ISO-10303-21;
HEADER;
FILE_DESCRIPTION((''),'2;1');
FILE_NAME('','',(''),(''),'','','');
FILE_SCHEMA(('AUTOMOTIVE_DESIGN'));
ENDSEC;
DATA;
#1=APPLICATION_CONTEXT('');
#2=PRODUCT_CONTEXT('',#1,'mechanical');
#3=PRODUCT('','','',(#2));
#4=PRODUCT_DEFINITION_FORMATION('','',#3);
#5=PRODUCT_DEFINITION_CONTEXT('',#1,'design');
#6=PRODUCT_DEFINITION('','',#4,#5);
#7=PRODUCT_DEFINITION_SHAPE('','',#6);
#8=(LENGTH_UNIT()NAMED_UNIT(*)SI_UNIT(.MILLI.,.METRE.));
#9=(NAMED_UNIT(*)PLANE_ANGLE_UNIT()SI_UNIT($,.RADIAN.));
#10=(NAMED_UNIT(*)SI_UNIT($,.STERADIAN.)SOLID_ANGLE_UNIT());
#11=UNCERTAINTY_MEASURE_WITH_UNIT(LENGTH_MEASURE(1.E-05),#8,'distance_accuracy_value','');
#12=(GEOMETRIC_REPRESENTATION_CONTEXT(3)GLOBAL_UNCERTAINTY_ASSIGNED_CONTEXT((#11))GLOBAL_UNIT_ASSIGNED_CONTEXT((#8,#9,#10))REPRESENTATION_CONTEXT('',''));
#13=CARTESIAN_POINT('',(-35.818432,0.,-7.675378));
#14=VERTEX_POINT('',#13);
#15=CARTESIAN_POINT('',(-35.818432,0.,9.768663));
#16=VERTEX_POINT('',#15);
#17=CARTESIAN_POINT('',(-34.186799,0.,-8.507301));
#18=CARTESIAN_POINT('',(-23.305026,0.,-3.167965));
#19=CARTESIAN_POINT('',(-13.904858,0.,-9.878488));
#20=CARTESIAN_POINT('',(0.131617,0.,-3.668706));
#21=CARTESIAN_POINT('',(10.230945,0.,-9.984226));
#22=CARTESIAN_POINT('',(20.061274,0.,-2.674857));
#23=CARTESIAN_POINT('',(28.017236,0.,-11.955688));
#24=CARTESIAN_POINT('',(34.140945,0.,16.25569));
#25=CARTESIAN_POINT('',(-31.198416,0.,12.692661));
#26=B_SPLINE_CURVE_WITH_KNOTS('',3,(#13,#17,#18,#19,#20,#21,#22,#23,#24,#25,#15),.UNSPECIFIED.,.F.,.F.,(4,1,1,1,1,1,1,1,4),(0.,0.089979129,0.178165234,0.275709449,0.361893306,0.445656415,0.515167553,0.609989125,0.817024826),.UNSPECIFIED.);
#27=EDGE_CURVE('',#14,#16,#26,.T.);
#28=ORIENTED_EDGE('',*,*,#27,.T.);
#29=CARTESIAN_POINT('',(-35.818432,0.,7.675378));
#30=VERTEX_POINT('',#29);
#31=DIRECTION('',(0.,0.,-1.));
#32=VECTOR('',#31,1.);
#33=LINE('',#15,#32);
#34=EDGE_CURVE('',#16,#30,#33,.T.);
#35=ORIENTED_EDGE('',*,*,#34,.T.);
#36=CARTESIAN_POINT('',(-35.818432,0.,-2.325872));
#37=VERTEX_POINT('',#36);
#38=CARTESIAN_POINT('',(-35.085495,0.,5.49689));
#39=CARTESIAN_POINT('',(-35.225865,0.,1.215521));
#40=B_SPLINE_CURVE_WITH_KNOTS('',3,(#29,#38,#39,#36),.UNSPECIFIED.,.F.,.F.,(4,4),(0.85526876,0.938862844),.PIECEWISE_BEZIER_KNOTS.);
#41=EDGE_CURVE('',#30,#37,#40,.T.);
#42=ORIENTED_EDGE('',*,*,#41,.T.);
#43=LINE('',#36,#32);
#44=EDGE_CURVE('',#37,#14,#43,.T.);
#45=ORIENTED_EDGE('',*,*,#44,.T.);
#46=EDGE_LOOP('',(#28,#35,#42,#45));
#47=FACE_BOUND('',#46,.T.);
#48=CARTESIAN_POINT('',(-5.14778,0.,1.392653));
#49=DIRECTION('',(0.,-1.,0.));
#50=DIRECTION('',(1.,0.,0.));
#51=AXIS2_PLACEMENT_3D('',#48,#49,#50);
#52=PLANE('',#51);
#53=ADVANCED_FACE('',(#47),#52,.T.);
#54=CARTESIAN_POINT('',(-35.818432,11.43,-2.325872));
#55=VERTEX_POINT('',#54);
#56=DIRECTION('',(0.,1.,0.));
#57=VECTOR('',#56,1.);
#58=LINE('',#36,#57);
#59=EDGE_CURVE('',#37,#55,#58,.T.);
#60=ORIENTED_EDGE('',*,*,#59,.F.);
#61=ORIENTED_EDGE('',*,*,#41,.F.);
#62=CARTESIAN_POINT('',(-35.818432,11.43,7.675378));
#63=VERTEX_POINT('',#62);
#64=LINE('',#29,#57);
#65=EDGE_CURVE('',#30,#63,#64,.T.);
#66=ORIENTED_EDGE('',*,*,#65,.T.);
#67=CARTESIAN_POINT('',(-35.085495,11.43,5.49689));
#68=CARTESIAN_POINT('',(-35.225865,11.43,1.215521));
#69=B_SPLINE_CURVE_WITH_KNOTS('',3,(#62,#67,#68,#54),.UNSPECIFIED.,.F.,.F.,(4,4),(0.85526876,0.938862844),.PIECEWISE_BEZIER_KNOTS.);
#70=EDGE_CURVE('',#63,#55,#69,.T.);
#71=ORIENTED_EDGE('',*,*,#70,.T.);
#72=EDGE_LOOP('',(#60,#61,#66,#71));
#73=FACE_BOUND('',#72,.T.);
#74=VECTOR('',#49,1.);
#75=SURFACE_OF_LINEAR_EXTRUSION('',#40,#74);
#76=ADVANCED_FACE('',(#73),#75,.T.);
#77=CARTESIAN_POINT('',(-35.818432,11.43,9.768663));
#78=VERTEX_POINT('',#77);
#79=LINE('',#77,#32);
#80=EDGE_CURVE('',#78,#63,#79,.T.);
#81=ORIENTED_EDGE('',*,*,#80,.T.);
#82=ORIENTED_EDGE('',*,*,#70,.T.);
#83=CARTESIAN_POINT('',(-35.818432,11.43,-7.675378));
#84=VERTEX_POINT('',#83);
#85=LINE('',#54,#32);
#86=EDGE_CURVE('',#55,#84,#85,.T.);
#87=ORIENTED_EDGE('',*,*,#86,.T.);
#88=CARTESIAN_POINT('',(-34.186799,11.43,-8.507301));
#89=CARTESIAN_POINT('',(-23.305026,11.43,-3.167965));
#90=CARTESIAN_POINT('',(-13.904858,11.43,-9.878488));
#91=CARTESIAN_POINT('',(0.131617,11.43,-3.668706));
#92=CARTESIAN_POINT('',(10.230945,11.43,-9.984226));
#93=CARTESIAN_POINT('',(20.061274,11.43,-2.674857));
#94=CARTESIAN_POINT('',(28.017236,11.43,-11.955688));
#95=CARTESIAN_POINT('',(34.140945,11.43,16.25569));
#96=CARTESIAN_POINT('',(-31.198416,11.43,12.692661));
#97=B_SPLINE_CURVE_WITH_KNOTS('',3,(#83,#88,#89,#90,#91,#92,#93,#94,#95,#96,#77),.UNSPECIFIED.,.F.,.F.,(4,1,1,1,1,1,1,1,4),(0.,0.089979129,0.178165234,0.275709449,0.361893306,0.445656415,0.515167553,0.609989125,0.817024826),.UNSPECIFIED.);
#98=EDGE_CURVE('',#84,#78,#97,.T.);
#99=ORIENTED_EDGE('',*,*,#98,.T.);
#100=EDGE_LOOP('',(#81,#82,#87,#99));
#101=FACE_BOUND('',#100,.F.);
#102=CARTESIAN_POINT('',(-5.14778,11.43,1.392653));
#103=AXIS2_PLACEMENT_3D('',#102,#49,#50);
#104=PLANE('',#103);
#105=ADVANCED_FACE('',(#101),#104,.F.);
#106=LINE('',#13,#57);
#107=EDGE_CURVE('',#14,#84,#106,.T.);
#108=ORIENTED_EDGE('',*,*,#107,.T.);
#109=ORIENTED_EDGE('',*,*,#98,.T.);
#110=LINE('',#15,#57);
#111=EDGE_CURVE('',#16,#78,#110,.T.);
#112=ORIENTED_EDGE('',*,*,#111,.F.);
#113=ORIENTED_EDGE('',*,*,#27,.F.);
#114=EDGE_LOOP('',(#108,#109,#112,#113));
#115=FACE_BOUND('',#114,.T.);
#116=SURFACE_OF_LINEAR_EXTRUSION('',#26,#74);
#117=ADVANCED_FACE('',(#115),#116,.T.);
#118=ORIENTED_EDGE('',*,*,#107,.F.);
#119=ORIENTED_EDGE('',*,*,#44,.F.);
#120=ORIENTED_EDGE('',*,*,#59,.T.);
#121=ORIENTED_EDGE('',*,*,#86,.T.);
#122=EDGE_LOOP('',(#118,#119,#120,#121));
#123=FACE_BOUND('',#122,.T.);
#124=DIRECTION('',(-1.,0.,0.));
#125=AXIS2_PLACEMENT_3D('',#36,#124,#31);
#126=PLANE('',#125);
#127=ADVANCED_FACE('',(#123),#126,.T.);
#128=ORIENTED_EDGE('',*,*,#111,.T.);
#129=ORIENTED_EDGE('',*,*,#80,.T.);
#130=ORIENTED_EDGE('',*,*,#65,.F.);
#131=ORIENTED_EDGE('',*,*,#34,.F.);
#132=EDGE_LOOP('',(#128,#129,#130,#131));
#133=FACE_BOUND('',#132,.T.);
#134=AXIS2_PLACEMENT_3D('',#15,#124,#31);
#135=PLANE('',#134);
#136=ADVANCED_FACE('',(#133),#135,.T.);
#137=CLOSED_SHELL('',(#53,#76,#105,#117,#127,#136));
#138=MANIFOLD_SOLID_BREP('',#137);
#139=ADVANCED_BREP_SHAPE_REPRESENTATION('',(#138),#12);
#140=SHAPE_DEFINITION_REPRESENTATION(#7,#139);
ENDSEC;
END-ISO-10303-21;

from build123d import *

# Parameters (mm, degrees)
F1_DEPTH = 11.43


# Not quite as in the source:
# - a feature of the source that left no trace in its solid (it failed there, or was rolled back) is left out


with BuildPart() as f1:
    # F0 (on Front) → F1 (new body)
    with BuildSketch(Plane.XZ):
        with BuildLine():
            add(Edge.make_bspline(
                [(-35.8184315264, -7.6753781177), (-34.1867990271, -8.5073013491), (-23.3050262159, -3.1679650902), (-13.9048580172, -9.8784881783), (0.1316174676, -3.6687063258), (10.2309447924, -9.9842260256), (20.0612737793, -2.6748573323), (28.0172360182, -11.955687996), (34.1409450761, 16.255689947), (-31.1984162209, 12.6926607697), (-35.8184315264, 9.7686629742)],
                knots=[0, 0, 0, 0, 0.089979129, 0.1781652343, 0.2757094492, 0.3618933063, 0.4456564152, 0.5151675526, 0.6099891246, 0.8170248264, 0.8170248264, 0.8170248264, 0.8170248264], degree=3))
            Line((-35.8184315264, 9.7686629742), (-35.8184315264, 7.6753781177))
            add(Edge.make_bspline(
                [(-35.8184315264, 7.6753781177), (-35.0854948786, 5.4968902562), (-35.2258651996, 1.2155212089), (-35.8184315264, -2.3258721922)],
                knots=[0.8552687604, 0.8552687604, 0.8552687604, 0.8552687604, 0.9388628442, 0.9388628442, 0.9388628442, 0.9388628442], degree=3))
            Line((-35.8184315264, -2.3258721922), (-35.8184315264, -7.6753781177))
        make_face()
    extrude(amount=-F1_DEPTH)


solid = f1.part
